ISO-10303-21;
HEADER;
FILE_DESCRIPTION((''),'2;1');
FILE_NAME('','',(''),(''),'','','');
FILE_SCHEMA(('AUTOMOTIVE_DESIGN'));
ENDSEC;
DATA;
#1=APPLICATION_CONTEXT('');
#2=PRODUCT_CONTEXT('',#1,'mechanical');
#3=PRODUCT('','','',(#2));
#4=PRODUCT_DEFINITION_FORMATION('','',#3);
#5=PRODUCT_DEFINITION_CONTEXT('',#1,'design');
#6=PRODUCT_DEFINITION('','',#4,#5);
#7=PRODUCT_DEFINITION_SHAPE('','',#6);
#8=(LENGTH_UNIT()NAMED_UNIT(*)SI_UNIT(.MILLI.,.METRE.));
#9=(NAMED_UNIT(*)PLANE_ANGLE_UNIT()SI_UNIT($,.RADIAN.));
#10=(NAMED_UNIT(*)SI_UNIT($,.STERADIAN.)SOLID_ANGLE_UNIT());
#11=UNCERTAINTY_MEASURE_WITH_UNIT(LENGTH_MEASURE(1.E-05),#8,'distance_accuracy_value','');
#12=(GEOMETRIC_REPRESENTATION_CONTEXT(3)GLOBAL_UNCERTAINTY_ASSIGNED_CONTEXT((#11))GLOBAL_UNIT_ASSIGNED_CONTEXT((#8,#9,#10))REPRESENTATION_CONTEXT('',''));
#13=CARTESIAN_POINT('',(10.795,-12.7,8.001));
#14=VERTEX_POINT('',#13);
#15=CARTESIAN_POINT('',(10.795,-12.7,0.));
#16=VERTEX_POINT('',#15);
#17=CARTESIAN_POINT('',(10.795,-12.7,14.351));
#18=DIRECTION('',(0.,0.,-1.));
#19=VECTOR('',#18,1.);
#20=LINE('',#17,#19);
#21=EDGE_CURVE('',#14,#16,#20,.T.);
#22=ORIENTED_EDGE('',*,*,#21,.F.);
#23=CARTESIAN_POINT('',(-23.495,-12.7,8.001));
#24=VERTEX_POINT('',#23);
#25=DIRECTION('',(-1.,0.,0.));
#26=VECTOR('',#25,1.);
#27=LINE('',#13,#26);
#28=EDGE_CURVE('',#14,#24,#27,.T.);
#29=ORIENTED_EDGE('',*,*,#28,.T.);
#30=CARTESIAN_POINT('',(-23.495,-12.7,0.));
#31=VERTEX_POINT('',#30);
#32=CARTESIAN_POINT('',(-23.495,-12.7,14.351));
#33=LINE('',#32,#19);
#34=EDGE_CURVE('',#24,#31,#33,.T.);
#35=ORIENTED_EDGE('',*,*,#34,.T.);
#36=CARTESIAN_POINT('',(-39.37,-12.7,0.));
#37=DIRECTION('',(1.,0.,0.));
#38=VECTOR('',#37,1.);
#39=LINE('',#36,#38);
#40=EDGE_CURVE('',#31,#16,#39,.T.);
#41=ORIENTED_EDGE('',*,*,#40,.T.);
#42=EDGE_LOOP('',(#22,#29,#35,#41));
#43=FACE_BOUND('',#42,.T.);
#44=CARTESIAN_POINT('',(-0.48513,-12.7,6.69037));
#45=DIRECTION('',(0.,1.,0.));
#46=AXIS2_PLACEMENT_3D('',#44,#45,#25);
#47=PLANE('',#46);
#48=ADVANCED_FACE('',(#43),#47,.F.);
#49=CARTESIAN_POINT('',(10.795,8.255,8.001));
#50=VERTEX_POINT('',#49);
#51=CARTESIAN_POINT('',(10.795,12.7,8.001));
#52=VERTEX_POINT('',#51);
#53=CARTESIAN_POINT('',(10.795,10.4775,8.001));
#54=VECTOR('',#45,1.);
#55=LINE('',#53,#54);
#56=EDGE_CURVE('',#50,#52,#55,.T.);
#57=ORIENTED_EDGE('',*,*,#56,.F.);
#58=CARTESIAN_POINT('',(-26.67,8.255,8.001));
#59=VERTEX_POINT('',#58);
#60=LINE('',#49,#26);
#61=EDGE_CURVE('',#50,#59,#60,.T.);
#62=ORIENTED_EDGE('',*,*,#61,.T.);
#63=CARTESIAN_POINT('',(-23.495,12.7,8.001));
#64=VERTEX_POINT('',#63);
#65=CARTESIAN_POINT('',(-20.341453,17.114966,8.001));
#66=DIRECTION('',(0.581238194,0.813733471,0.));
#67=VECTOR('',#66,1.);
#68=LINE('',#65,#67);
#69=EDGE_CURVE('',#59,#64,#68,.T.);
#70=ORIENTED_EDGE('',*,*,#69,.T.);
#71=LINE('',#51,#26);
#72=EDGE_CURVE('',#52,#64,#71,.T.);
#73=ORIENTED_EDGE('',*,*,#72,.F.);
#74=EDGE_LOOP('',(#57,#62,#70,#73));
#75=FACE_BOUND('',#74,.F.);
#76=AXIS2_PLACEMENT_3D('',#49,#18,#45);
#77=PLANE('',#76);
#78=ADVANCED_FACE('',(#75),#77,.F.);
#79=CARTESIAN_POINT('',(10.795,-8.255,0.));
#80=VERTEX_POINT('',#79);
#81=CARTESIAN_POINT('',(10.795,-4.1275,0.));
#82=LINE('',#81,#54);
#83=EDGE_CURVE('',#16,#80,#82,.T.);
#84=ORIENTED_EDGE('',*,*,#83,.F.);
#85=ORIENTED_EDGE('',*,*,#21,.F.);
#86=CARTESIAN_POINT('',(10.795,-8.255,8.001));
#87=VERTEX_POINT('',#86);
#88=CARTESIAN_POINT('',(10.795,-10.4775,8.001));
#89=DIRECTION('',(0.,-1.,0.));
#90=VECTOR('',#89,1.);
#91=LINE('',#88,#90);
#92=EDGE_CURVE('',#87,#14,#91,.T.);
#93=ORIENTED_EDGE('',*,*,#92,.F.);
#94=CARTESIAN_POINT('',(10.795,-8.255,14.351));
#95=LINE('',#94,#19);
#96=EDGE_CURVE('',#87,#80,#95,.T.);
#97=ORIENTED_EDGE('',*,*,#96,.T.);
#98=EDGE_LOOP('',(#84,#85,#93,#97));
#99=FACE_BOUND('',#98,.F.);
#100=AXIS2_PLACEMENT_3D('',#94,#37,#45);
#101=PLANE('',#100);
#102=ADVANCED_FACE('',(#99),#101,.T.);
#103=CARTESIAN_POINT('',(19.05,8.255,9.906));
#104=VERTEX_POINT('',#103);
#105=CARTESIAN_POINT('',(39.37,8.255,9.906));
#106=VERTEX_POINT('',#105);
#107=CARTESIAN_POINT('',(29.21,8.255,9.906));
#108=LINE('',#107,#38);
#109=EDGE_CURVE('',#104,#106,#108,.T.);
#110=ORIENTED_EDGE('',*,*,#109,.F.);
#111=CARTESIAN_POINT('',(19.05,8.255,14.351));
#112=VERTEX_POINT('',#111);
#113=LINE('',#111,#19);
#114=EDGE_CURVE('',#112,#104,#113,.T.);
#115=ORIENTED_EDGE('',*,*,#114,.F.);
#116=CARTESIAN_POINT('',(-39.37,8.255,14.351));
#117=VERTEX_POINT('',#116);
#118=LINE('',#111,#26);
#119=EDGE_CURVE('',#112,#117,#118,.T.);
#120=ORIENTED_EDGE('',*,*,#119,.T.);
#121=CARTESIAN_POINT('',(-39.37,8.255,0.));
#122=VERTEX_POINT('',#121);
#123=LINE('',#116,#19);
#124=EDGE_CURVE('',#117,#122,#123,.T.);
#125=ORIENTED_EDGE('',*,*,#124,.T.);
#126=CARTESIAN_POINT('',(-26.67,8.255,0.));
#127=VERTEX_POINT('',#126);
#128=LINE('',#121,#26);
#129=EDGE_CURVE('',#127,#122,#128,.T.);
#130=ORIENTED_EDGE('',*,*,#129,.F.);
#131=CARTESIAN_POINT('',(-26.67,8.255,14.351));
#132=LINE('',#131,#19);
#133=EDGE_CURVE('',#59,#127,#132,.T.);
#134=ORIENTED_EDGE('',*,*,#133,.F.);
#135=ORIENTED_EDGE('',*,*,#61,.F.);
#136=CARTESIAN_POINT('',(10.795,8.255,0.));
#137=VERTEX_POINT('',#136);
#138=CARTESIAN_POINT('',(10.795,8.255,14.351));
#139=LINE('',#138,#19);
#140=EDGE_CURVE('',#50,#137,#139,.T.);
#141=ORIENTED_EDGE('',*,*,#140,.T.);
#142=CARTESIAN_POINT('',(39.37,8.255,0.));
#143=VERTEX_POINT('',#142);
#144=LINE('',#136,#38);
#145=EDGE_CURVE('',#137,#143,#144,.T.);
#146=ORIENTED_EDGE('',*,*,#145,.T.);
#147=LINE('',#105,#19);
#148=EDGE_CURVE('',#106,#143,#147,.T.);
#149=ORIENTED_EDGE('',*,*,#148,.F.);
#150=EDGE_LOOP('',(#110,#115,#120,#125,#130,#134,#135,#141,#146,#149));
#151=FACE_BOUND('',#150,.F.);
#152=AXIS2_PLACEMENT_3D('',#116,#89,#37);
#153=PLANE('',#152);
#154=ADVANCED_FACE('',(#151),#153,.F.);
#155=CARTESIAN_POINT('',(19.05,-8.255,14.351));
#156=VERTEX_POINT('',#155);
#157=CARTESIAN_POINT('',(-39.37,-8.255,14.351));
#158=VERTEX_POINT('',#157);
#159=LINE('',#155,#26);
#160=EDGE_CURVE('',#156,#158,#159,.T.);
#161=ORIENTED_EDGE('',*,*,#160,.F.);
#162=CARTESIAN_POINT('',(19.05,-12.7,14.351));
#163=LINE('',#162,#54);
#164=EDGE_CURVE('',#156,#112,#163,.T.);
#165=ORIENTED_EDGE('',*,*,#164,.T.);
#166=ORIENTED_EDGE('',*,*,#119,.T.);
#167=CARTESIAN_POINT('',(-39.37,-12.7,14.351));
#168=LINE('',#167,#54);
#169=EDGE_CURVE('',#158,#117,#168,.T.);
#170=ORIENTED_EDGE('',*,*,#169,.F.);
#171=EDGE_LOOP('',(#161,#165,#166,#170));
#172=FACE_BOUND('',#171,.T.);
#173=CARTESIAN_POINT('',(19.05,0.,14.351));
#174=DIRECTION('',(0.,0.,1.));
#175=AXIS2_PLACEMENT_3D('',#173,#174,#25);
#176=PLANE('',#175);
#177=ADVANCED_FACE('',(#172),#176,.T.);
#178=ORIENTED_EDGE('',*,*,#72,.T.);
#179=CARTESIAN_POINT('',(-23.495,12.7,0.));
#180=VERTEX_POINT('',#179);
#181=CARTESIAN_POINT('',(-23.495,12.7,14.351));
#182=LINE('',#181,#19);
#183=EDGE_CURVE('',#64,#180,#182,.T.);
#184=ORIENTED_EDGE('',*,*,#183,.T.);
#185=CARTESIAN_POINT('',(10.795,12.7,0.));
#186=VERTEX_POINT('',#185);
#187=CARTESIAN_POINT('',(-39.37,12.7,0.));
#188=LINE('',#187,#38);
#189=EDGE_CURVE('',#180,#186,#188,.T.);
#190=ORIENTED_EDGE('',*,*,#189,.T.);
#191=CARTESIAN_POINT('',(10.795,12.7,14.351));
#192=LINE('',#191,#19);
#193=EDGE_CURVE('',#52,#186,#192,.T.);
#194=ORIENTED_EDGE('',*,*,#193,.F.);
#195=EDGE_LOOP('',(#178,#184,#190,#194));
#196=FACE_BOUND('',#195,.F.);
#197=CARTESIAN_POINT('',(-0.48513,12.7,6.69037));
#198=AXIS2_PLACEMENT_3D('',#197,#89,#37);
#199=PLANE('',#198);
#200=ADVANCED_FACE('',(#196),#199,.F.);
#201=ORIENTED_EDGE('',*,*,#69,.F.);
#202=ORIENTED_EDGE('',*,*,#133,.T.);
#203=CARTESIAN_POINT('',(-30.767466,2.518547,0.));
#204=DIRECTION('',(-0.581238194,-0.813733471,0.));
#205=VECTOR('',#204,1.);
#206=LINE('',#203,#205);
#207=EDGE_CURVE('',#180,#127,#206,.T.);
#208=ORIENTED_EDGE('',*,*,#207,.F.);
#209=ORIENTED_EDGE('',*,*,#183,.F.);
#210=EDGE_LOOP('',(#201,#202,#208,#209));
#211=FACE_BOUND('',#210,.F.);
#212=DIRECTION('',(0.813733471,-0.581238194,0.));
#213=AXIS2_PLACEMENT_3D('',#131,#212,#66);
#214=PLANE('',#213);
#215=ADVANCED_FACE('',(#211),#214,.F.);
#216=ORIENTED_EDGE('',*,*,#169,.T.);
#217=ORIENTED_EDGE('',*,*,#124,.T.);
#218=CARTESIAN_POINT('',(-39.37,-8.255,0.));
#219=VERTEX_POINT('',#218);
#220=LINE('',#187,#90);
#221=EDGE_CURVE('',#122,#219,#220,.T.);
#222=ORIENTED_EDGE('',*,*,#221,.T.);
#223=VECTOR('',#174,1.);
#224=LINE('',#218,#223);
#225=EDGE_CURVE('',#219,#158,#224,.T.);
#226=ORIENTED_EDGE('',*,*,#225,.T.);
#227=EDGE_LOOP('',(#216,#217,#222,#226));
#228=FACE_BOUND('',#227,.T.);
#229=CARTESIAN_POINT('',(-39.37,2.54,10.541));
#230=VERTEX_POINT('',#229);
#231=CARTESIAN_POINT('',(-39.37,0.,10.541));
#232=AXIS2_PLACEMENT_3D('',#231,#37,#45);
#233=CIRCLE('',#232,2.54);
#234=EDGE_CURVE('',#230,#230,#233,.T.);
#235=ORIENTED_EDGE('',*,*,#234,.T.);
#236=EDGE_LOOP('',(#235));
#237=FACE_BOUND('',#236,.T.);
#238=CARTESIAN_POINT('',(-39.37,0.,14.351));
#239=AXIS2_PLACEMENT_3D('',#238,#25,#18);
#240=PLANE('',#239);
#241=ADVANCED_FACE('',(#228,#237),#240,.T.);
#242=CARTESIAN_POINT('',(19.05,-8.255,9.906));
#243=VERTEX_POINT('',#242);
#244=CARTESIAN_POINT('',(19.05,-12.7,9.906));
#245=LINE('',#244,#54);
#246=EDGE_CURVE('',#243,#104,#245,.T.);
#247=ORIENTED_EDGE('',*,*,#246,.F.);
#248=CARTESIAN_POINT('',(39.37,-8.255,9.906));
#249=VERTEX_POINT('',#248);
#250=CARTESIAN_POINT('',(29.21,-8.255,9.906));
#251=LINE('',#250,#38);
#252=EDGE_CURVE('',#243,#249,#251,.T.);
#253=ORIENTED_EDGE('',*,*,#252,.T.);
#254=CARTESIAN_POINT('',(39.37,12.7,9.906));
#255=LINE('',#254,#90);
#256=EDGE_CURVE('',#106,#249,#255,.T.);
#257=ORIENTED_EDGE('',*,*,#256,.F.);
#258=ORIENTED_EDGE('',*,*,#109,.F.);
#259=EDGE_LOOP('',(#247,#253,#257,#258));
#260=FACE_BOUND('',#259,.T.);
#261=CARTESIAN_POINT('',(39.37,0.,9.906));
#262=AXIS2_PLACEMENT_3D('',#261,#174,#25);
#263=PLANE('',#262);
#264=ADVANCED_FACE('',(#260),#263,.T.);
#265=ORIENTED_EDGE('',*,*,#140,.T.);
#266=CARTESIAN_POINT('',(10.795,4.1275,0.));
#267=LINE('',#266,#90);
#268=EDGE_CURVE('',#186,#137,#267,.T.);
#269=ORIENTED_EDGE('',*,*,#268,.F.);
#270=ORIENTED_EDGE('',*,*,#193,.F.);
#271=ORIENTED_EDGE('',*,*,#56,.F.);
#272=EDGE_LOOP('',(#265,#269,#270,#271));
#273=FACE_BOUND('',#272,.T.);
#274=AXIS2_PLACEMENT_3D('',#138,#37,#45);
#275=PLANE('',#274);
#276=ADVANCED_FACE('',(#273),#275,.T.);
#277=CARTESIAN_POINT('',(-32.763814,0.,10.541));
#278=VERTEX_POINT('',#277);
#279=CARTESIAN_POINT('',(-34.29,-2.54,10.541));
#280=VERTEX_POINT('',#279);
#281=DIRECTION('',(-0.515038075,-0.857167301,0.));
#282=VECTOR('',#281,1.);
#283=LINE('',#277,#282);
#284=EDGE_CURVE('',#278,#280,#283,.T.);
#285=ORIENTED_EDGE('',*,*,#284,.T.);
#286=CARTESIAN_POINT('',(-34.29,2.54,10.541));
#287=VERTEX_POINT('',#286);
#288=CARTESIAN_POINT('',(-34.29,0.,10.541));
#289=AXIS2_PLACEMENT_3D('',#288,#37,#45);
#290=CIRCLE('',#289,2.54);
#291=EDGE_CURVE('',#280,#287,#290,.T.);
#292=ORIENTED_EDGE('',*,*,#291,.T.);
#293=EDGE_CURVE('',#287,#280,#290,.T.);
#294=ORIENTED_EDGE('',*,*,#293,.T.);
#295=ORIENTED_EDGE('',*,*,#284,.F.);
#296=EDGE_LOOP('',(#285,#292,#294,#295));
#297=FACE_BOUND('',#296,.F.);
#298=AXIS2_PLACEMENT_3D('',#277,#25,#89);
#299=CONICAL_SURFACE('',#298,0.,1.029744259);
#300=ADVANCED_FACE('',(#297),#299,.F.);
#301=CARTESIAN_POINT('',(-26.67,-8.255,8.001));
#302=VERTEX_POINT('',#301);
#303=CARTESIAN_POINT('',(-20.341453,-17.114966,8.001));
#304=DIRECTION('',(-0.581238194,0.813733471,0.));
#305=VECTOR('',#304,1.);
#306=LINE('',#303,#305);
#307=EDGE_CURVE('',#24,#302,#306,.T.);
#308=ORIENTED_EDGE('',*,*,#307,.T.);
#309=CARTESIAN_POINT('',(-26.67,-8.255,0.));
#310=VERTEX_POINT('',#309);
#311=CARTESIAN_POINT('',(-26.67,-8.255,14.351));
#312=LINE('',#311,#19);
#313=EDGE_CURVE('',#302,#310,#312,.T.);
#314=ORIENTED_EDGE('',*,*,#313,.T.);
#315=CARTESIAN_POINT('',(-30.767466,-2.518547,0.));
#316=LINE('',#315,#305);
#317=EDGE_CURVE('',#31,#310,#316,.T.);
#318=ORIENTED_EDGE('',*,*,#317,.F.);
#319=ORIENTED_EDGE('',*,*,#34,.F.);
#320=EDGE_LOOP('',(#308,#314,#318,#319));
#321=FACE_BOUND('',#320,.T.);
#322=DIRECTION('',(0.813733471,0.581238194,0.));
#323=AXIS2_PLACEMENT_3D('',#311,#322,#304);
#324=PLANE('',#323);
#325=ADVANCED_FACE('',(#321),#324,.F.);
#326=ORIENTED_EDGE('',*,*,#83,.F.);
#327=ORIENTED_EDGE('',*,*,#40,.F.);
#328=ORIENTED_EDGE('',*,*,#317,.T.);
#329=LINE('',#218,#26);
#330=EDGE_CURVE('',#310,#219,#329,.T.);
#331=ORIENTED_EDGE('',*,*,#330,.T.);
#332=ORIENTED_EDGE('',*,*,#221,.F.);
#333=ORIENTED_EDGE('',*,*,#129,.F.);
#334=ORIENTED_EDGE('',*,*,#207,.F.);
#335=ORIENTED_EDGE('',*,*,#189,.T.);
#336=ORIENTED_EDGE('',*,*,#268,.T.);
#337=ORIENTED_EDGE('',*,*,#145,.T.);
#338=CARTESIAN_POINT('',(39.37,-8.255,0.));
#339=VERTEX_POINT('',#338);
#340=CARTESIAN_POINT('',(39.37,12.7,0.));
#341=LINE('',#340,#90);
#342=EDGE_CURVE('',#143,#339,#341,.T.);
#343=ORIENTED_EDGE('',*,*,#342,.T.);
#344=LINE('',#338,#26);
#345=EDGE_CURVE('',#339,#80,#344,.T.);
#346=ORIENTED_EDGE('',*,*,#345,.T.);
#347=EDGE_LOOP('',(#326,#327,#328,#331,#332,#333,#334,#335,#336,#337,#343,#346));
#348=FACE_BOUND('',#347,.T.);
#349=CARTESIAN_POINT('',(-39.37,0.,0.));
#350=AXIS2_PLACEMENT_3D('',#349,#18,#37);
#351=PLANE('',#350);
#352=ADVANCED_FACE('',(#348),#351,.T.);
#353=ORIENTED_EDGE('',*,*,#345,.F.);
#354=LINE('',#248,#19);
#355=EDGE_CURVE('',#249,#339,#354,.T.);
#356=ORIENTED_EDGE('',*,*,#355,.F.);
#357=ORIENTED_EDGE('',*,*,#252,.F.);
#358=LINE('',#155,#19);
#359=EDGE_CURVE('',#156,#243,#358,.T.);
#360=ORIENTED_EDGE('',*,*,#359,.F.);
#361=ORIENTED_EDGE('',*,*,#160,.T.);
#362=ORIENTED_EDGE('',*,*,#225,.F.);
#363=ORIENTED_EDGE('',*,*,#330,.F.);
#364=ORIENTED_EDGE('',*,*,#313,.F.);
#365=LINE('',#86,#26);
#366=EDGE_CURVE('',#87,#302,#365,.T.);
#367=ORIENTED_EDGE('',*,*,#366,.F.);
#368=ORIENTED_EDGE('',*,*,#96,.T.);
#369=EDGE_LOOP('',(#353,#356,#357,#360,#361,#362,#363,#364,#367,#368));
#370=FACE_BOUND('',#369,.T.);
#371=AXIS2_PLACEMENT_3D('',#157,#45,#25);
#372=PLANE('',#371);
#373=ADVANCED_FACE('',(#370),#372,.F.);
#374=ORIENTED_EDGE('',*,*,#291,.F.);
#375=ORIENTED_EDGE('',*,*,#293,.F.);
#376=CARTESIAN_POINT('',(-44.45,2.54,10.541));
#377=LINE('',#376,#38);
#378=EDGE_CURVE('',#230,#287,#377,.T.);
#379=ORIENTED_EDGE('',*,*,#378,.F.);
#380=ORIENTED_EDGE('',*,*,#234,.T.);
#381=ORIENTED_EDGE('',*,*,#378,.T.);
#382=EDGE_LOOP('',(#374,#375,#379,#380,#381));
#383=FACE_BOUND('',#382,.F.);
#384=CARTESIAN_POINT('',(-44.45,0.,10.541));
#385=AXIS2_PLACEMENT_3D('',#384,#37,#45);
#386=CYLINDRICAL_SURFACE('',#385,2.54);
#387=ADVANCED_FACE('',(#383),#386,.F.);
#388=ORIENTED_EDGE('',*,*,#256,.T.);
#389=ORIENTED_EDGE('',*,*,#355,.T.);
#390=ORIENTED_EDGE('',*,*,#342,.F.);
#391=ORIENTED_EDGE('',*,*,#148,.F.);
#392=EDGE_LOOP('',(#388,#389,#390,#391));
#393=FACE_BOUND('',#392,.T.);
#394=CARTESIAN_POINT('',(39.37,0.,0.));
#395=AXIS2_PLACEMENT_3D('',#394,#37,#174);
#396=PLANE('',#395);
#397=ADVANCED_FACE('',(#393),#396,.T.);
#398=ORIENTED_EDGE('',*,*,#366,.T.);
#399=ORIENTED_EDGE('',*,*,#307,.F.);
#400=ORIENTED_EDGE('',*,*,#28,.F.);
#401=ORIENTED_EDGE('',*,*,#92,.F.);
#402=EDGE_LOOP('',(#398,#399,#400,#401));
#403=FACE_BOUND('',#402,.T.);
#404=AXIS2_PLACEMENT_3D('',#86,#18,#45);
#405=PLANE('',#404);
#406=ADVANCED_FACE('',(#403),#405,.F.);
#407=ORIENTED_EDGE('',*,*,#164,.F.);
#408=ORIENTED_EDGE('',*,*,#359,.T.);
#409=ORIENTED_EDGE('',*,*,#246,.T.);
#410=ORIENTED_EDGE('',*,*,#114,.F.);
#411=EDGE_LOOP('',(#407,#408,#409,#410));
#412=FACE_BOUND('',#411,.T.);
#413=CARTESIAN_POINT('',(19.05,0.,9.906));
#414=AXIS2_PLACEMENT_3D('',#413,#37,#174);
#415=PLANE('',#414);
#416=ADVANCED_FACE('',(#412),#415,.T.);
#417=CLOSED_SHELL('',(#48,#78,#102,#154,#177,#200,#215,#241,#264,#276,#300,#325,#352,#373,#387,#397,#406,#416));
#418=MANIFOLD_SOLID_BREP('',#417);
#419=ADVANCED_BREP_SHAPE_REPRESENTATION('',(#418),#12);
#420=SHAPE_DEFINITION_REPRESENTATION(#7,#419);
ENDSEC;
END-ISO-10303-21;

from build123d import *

# Parameters (mm, degrees)
F1_DEPTH      = 12.7
F1_DEPTH_BACK = 12.7
F3_D          = 5.08
F3_DEPTH      = 5.08
F3_TIP        = 1.5261859723
F5_DEPTH      = 92
F4_W          = 8.255
F4_H          = 4.445
F6_DEPTH      = 14.352
F8_W          = 20.32
F8_H          = 4.445
F9_DEPTH      = 9.907
F10_W         = 4.445
F10_H         = 6.35
F11_DEPTH     = 50.166


# Not quite as in the source:
# - an extrude ends at something that could not be found from the text; its depth is read off the source's solid
# - a pattern or mirror of a feature is missing from the dataset's text; its kind, count and spacing are read off the source's solid


with BuildPart() as f1:
    # F0 (on Front) → F1 (new body, two sides)
    with BuildSketch(Plane.XZ) as f1_sk:
        Polygon((-39.37, 14.351), (-39.37, 0), (39.37, 0), (39.37, 9.906), (19.05, 9.906), (19.05, 14.351), align=None)
    extrude(amount=F1_DEPTH)
    extrude(f1_sk.sketch, amount=-F1_DEPTH_BACK)

    # F3
    with Locations(Plane(origin=(-39.37, 0, 0), x_dir=(0, -1, 0), z_dir=(-1, 0, 0))):
        with Locations((0, 10.541)):
            Hole(F3_D / 2, depth=F3_DEPTH)
            with Locations((0, 0, -(F3_DEPTH + F3_TIP / 2))):  # 118° drill point
                Cone(0, F3_D / 2, F3_TIP, mode=Mode.SUBTRACT)

    # F5 (cut, through all): a face of the model
    f5_faces = [f1.faces().sort_by_distance(p)[0] for p in [
        (0, 0, 0),
    ]]
    extrude(f5_faces, amount=F5_DEPTH, mode=Mode.SUBTRACT)

    # F4 (on face) → F6 (cut, through all)
    with BuildSketch(Plane.XY.offset(14.351)):
        Polygon((-39.37, 12.7), (-39.37, 8.255), (-26.67, 8.255), (-23.495, 12.7), align=None)
        with Locations((14.9225, 10.4775)):
            Rectangle(F4_W, F4_H)
    extrude(amount=-F6_DEPTH, mode=Mode.SUBTRACT)

    # F7: F1 across plane


with BuildPart() as f1_1:
    add(f1.part)
    add(f1.part.mirror(Plane.XZ), mode=Mode.INTERSECT)

    # F8 (on face) → F9 (cut, through all)
    with BuildSketch(Plane.XY.offset(9.906)):
        with Locations((29.21, -10.4775)):
            Rectangle(F8_W, F8_H)
        with Locations((29.21, 10.4775)):
            Rectangle(F8_W, F8_H)
    extrude(amount=-F9_DEPTH, mode=Mode.SUBTRACT)

    # F10 (on face) → F11 (cut, through all)
    with BuildSketch(Plane.YZ.offset(10.795)):
        with Locations((10.4775, 11.176)):
            Rectangle(F10_W, F10_H)
    f11 = extrude(amount=-F11_DEPTH, mode=Mode.SUBTRACT)

    # F11_copies: F11 across plane
    add(f11.mirror(Plane(origin=(0, 0, 0), x_dir=(0, 0, -1), z_dir=(0, -1, 0))), mode=Mode.SUBTRACT)


solid = f1_1.part
